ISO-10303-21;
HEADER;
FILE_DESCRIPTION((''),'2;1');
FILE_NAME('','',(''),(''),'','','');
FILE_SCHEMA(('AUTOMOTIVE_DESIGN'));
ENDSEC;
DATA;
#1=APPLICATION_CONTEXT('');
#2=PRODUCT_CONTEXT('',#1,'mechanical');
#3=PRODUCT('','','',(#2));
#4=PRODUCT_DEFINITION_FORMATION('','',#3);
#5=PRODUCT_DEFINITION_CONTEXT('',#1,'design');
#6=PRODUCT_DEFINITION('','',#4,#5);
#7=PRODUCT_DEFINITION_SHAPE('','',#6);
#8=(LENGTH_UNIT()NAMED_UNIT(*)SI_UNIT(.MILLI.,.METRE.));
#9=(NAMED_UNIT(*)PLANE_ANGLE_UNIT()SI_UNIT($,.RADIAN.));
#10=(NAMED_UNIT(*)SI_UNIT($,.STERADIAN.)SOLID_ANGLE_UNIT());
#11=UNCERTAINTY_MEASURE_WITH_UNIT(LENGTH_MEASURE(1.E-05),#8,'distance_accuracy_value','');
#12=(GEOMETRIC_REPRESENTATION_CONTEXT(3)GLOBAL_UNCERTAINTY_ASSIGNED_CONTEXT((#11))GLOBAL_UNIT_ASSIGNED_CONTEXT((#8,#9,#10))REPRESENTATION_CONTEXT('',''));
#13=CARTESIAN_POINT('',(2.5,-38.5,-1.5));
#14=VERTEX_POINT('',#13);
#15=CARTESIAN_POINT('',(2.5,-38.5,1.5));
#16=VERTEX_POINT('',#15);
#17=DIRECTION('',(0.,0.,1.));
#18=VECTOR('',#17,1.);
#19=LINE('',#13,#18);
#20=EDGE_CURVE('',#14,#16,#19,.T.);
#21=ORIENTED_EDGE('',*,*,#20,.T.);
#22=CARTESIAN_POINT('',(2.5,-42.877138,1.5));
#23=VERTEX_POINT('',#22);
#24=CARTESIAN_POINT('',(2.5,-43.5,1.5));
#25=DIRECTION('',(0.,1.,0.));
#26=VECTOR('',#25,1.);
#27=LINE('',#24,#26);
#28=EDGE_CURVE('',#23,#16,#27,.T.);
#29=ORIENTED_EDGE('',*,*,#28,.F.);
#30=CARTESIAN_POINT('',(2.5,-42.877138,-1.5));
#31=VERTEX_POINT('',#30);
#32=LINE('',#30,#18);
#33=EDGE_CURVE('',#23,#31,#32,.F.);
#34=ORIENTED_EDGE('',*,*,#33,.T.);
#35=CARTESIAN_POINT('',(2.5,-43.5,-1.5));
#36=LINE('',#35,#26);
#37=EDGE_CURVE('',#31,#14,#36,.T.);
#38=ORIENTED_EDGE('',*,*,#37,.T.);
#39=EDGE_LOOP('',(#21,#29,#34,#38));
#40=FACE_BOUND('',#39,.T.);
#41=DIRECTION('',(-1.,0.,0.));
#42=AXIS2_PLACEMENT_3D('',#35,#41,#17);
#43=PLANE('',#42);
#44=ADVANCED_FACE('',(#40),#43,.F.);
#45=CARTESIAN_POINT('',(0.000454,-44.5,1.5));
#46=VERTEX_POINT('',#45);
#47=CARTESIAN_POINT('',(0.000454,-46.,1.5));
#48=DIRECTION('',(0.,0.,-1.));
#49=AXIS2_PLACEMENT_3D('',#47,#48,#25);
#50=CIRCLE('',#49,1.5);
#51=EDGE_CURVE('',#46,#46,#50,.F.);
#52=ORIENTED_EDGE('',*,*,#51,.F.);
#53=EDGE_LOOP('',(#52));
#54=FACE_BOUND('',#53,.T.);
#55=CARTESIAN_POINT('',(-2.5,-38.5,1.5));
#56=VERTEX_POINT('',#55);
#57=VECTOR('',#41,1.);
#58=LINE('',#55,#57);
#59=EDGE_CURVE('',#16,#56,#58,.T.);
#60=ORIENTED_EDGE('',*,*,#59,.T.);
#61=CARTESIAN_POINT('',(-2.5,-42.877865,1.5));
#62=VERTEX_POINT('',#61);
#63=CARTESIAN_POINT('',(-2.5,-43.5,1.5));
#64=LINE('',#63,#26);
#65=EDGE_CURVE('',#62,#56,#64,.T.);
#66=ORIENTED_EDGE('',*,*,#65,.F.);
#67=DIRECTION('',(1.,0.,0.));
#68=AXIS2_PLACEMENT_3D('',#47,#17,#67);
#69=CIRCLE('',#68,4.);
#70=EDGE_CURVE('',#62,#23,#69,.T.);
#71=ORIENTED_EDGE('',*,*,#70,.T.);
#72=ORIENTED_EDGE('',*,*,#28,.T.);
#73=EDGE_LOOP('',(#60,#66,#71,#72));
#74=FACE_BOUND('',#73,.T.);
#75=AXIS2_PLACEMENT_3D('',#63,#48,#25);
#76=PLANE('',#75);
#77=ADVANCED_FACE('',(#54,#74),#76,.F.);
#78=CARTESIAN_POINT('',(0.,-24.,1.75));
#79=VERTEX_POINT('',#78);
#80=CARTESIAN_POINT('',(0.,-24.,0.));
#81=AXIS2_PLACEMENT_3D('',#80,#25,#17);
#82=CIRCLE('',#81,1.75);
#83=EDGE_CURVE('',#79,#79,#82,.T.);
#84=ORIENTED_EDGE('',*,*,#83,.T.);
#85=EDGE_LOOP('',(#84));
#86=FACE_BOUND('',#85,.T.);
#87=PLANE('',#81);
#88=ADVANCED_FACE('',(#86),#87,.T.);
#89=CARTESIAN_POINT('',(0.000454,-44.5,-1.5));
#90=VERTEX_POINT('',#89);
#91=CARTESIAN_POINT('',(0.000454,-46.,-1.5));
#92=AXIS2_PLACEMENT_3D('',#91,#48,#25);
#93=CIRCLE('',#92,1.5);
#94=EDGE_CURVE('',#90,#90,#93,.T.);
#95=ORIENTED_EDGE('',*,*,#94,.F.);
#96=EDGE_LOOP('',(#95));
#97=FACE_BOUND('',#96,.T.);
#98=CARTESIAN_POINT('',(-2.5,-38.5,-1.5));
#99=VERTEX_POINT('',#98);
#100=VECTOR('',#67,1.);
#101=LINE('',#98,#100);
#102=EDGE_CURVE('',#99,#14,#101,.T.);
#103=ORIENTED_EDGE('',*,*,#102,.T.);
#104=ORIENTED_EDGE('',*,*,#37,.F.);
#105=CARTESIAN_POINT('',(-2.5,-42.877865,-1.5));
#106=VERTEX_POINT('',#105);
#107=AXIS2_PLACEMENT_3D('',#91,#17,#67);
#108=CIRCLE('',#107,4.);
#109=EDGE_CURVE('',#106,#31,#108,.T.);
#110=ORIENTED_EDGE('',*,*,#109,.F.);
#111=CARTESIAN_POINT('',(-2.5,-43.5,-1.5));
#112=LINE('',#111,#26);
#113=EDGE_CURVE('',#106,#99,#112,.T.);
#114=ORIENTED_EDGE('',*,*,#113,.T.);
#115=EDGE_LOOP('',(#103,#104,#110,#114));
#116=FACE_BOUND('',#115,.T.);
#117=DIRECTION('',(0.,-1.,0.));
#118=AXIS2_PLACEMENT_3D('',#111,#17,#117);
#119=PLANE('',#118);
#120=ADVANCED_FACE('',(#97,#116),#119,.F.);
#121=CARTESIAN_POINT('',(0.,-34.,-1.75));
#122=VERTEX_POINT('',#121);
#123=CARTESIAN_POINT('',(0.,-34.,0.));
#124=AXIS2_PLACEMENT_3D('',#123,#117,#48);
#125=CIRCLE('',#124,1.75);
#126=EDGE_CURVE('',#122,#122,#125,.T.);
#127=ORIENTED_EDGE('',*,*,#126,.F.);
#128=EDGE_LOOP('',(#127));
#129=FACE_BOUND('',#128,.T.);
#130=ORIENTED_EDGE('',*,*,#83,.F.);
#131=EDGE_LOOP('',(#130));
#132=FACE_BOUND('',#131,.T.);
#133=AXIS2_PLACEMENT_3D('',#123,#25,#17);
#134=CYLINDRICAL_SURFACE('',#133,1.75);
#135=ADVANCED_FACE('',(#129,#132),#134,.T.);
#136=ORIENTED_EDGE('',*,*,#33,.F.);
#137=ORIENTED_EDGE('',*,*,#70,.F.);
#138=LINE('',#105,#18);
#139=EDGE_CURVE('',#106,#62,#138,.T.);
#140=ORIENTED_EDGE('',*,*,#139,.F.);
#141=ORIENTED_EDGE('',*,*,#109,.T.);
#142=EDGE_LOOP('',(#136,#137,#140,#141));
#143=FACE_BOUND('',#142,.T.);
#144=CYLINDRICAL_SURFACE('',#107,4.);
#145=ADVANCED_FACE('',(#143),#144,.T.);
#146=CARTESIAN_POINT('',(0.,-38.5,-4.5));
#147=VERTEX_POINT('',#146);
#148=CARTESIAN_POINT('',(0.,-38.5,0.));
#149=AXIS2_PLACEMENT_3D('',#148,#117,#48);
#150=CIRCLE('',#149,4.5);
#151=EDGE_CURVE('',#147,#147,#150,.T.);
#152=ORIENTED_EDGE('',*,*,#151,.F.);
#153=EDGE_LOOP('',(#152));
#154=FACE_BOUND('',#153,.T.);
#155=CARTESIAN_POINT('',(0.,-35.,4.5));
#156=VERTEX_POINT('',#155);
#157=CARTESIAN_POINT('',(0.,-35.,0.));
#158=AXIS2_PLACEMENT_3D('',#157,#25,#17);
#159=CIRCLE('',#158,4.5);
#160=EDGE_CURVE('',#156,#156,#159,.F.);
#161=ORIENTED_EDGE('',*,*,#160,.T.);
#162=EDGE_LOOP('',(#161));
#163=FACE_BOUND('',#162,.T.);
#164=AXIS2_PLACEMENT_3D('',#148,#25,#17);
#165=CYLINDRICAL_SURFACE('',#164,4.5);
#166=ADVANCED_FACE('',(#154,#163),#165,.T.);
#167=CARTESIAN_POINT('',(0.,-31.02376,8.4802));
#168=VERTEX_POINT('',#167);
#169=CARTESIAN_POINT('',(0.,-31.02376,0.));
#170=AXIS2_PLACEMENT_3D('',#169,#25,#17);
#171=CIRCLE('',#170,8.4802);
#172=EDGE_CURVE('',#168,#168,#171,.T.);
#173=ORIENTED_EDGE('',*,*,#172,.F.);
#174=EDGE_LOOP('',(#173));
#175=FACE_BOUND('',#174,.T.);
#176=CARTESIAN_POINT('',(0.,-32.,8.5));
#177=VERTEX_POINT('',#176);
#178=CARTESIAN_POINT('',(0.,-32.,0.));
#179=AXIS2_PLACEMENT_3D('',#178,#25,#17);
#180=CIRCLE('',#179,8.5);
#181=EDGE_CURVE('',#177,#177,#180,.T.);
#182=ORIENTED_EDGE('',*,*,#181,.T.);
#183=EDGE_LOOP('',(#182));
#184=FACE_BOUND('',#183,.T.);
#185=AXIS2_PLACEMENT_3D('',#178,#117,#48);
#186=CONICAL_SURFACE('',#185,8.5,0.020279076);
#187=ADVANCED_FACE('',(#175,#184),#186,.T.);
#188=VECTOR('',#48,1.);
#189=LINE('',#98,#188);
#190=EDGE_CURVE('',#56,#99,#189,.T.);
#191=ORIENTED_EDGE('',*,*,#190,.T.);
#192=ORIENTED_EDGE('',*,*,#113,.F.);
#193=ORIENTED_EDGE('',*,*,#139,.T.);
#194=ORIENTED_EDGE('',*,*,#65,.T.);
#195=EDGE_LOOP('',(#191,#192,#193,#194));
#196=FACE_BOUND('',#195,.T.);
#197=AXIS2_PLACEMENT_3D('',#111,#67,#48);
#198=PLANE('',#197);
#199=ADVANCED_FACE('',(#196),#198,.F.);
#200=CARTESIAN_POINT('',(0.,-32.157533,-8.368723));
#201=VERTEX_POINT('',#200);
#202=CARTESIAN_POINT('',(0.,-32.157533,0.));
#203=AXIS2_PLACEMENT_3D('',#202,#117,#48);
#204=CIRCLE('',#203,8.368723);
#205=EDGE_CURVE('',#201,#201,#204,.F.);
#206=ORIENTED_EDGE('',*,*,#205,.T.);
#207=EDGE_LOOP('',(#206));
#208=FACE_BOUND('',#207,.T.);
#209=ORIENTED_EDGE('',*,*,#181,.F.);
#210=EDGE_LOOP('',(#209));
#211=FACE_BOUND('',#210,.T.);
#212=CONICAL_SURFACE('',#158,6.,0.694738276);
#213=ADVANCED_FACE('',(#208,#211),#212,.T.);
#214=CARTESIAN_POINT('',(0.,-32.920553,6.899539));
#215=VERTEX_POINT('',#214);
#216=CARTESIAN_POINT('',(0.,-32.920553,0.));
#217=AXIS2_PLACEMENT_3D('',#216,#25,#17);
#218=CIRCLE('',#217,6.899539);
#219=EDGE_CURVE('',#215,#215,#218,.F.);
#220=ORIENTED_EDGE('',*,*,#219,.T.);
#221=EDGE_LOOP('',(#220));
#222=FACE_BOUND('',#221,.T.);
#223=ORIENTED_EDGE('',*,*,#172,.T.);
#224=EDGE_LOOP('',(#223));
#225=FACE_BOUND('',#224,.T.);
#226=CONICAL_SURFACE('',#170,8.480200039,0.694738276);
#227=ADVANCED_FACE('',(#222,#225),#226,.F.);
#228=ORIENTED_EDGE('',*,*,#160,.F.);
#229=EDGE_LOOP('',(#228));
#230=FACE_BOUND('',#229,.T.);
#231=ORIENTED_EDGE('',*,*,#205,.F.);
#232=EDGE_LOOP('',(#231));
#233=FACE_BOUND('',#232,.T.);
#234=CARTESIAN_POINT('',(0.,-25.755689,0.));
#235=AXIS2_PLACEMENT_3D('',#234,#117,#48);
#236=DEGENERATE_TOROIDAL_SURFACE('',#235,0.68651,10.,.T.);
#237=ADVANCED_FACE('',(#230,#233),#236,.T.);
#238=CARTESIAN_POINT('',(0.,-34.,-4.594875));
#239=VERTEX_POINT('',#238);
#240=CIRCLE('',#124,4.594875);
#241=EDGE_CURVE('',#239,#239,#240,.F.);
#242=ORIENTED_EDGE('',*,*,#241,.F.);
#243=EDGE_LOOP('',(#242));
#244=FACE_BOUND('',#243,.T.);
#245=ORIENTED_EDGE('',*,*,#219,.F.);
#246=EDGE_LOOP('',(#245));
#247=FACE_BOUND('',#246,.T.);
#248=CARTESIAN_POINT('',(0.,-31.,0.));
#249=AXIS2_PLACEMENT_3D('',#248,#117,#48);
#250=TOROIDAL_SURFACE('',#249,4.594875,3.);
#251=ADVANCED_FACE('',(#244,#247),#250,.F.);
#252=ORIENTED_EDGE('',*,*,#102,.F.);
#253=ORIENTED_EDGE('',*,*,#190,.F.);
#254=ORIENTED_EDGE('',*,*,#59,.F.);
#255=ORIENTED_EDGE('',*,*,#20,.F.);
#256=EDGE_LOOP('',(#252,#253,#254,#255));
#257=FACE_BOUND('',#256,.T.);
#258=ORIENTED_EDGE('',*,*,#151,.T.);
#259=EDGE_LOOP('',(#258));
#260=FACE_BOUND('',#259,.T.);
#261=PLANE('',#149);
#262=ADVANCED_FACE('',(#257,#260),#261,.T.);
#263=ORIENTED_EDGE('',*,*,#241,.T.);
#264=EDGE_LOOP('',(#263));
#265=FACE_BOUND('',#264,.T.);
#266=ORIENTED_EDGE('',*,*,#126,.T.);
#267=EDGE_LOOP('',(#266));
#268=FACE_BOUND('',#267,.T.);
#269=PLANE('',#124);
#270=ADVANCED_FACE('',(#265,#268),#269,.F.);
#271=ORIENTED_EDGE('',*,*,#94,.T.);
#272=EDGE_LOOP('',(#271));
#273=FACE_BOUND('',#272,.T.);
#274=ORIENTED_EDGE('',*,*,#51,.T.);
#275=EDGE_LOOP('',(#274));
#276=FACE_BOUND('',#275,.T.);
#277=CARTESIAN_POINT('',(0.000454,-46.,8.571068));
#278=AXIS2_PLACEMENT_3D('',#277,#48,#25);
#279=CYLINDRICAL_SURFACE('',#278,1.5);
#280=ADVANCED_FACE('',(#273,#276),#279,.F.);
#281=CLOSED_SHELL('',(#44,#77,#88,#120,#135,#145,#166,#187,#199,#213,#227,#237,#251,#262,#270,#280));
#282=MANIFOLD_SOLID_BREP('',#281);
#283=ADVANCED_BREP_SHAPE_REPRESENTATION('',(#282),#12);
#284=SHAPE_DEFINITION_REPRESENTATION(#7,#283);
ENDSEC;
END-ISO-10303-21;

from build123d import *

# Parameters (mm, degrees)
ESBO_O1_R                     = 7.5
RESSALTO_EXTRUS_O1_DEPTH      = 8
ESBO_O2_R                     = 8.5
RESSALTO_EXTRUS_O2_DEPTH      = 3
ESBO_O3_W                     = 8
ESBO_O3_H                     = 3
RESSALTO_EXTRUS_O3_DEPTH      = 10
CORTE_EXTRUS_O1_DEPTH         = 23.27666941
CORTE_EXTRUS_O1_DEPTH_BACK    = 23.27666941
ESBO_O5_R                     = 3
CORTE_EXTRUS_O2_DEPTH         = 3
ESBO_O6_R                     = 5.5
RESSALTO_EXTRUS_O4_DEPTH      = 10
FILETE1_R                     = 1
ESBO_O8_R                     = 1.75
RESSALTO_EXTRUS_O5_DEPTH      = 10
ESBO_O10_R                    = 4.5
RESSALTO_EXTRUS_O6_DEPTH      = 3.5
ESBO_O11_W                    = 5
ESBO_O11_H                    = 3
RESSALTO_EXTRUS_O7_DEPTH      = 5
RESSALTO_EXTRUS_O8_DEPTH      = 1.5
RESSALTO_EXTRUS_O8_DEPTH_BACK = 1.5
ESBO_O13_R                    = 4
ESBO_O14_R                    = 2.5
CORTE_EXTRUS_O3_DEPTH         = 10
FILETE2_R                     = 10
FILETE3_R                     = 3
CUT_EXTRUDE2_START            = -24
CUT_EXTRUDE2_OUTLINE_R        = 8.5
CUT_EXTRUDE2_DEPTH            = 43
SKETCH2_R                     = 2.5
SKETCH2_R_2                   = 1.5
BOSS_EXTRUDE1_DEPTH           = 3


with BuildPart() as part:
    # Esboço1 → Ressalto-extrusão1 (new body)
    with BuildSketch(Plane(origin=(0, 0, 0), x_dir=(1, 0, 0), z_dir=(0, 1, 0))):
        with Locations(Location((0, 0, 0), (0, 0, 270))):
            Circle(ESBO_O1_R)
    extrude(amount=RESSALTO_EXTRUS_O1_DEPTH)

    # Esboço2 → Ressalto-extrusão2 (add)
    with BuildSketch(Plane.XZ):
        with Locations(Location((0, 0, 0), (0, 0, 270))):
            Circle(ESBO_O2_R)
    extrude(amount=RESSALTO_EXTRUS_O2_DEPTH)

    # Esboço3 → Ressalto-extrusão3 (add)
    with BuildSketch(Plane(origin=(0, 8, 0), x_dir=(1, 0, 0), z_dir=(0, 1, 0))):
        Rectangle(ESBO_O3_W, ESBO_O3_H)
    extrude(amount=RESSALTO_EXTRUS_O3_DEPTH)

    # Esboço4 → Corte-extrusão1 (cut, two sides: drawn at the far end of the back side and taken through both)
    with BuildSketch(Plane.XY.offset(1.5).offset(-CORTE_EXTRUS_O1_DEPTH_BACK)):
        with BuildLine():
            Line((-4, 18), (-4, 13.999999871))
            ThreePointArc((-4, 13.999999871), (-2.828427176, 16.828427073), (-1.7e-08, 18))
            Line((-1.7e-08, 18), (-4, 18))
        make_face()
        with BuildLine():
            Line((4, 18), (-1.7e-08, 18))
            ThreePointArc((-1.7e-08, 18), (2.828427119, 16.828427131), (4, 14))
            Line((4, 14), (4, 18))
        make_face()
    extrude(amount=CORTE_EXTRUS_O1_DEPTH + CORTE_EXTRUS_O1_DEPTH_BACK, mode=Mode.SUBTRACT)

    # Esboço5 → Corte-extrusão2 (cut)
    with BuildSketch(Plane.XY.offset(1.5)):
        with Locations((0, 14)):
            Circle(ESBO_O5_R)
    extrude(amount=-CORTE_EXTRUS_O2_DEPTH, mode=Mode.SUBTRACT)

    # Esboço6 → Ressalto-extrusão4 (add)
    with BuildSketch(Plane.XZ.offset(3)):
        with Locations(Location((0, 0, 0), (0, 0, 270))):
            Circle(ESBO_O6_R)
    extrude(amount=RESSALTO_EXTRUS_O4_DEPTH)

    # Loft1: read off the stored shape, not the designer's step
    # Loft1: loft between two sections, ruled curve by curve
    loft1_from = [
        Edge.make_bspline([(1.054348973, -13, 5.397994835), (-9.741640698, -13, 7.506692781), (-11.850338644, -13, -3.28929689), (-1.054348973, -13, -5.397994835), (9.741640698, -13, -7.506692781), (11.850338644, -13, 3.28929689), (1.054348973, -13, 5.397994835)], [0, 0, 0, 0, 0.5, 0.5, 0.5, 1, 1, 1, 1], 3, [1, 0.333333333, 0.333333333, 1, 0.333333333, 0.333333333, 1]),
    ]
    loft1_to = [
        Edge.make_bspline([(-0.660465845, -24, 3.945096307), (-8.550658458, -24, 2.624164617), (-7.229726768, -24, -5.266027996), (0.660465845, -24, -3.945096307), (8.550658458, -24, -2.624164617), (7.229726768, -24, 5.266027996), (-0.660465845, -24, 3.945096307)], [0, 0, 0, 0, 0.5, 0.5, 0.5, 1, 1, 1, 1], 3, [1, 0.333333333, 0.333333333, 1, 0.333333333, 0.333333333, 1]),
    ]
    loft1 = Solid(Shell([*[Face.make_surface_from_curves(loft1_from[k], loft1_to[k]) for k in range(1)], Face(Wire(loft1_from)), Face(Wire(loft1_to))]))
    add(loft1)

    # Filete1
    filete1_edges = [part.edges().sort_by_distance(p)[0] for p in [
        (-5.474439314, -13, 0.529635915),
    ]]
    fillet(filete1_edges, radius=FILETE1_R)

    # Esboço8 → Ressalto-extrusão5 (add)
    with BuildSketch(Plane.XZ.offset(24)):
        with Locations(Location((0, 0, 0), (0, 0, 270))):
            Circle(ESBO_O8_R)
    extrude(amount=RESSALTO_EXTRUS_O5_DEPTH)

    # Esboço9 → Revolução1 (revolve)
    with BuildSketch(Plane(origin=(0, 0, 0), x_dir=(0, 0, -1), z_dir=(1, 0, 0)), mode=Mode.PRIVATE) as revolu_o1_sk:
        Polygon((0, -34), (6, -34), (8.480200039, -31.023759953), (8.5, -32), (6, -35), (0, -35), align=None)
    revolve(revolu_o1_sk.sketch.rotate(Axis((0, 0, 0), (0, -1, 0)), 180), axis=Axis((0, 0, 0), (0, -1, 0)))

    # Esboço10 → Ressalto-extrusão6 (add)
    with BuildSketch(Plane.XZ.offset(35)):
        with Locations(Location((0, 0, 0), (0, 0, 90))):
            Circle(ESBO_O10_R)
    extrude(amount=RESSALTO_EXTRUS_O6_DEPTH)

    # Esboço11 → Ressalto-extrusão7 (add)
    with BuildSketch(Plane.XZ.offset(38.5)):
        Rectangle(ESBO_O11_W, ESBO_O11_H)
    extrude(amount=RESSALTO_EXTRUS_O7_DEPTH)

    # Esboço13 → Ressalto-extrusão8 (add, two sides: drawn at the far end of the back side and taken through both)
    with BuildSketch(Plane.XY.offset(-RESSALTO_EXTRUS_O8_DEPTH_BACK)):
        with Locations((0.000453955, -45.999999998)):
            Circle(ESBO_O13_R)
    extrude(amount=RESSALTO_EXTRUS_O8_DEPTH + RESSALTO_EXTRUS_O8_DEPTH_BACK)

    # Esboço14 → Corte-extrusão3 (cut)
    with BuildSketch(Plane(origin=(0, 0, -1.5), x_dir=(-1, 0, 0), z_dir=(0, 0, -1))):
        with Locations((-0.000453955, -45.999999998)):
            Circle(ESBO_O14_R)
    extrude(amount=-CORTE_EXTRUS_O3_DEPTH, mode=Mode.SUBTRACT)

    # Filete2
    # the kernel refuses this fillet: 10 mm, written as the material it takes off along each edge
    with BuildSketch(Plane(origin=(0, -35, 0), x_dir=(0, 0, 1), z_dir=(1, 0, 0))) as filete2_piece_1:
        with BuildLine():
            CenterArc((0.686510113, -9.244311488), FILETE2_R, 39.805571092, 27.777161729)
            Line((4.5, 0), (6, 0))
            Line((6, 0), (8.368722909, -2.842467491))
        make_face()
    revolve(axis=Axis((0, -35, 0), (0, -1, 0)), mode=Mode.SUBTRACT)

    # Filete3
    filete3_edges = [part.edges().sort_by_distance(p)[0] for p in [
        (0, -34, -6),
    ]]
    fillet(filete3_edges, radius=FILETE3_R)

    # Cut-Extrude2: read off the stored shape, not the designer's step
    # Cut-Extrude2 outline → Cut-Extrude2 (cut)
    with BuildSketch(Plane(origin=(0, 0, 0), x_dir=(1, 0, 0), z_dir=(0, 1, 0)).offset(CUT_EXTRUDE2_START)):
        Circle(CUT_EXTRUDE2_OUTLINE_R)
    extrude(amount=CUT_EXTRUDE2_DEPTH, mode=Mode.SUBTRACT)

    # Sketch2 → Boss-Extrude1 (add)
    with BuildSketch(Plane(origin=(0, 0, -1.5), x_dir=(-1, 0, 0), z_dir=(0, 0, -1))):
        with Locations((-0.000453955, -45.999999998)):
            Circle(SKETCH2_R)
        with Locations(Location((-0.000453955, -45.999999998, 0), (0, 0, 90))):
            Circle(SKETCH2_R_2, mode=Mode.SUBTRACT)
    extrude(amount=-BOSS_EXTRUDE1_DEPTH)


solid = part.part
